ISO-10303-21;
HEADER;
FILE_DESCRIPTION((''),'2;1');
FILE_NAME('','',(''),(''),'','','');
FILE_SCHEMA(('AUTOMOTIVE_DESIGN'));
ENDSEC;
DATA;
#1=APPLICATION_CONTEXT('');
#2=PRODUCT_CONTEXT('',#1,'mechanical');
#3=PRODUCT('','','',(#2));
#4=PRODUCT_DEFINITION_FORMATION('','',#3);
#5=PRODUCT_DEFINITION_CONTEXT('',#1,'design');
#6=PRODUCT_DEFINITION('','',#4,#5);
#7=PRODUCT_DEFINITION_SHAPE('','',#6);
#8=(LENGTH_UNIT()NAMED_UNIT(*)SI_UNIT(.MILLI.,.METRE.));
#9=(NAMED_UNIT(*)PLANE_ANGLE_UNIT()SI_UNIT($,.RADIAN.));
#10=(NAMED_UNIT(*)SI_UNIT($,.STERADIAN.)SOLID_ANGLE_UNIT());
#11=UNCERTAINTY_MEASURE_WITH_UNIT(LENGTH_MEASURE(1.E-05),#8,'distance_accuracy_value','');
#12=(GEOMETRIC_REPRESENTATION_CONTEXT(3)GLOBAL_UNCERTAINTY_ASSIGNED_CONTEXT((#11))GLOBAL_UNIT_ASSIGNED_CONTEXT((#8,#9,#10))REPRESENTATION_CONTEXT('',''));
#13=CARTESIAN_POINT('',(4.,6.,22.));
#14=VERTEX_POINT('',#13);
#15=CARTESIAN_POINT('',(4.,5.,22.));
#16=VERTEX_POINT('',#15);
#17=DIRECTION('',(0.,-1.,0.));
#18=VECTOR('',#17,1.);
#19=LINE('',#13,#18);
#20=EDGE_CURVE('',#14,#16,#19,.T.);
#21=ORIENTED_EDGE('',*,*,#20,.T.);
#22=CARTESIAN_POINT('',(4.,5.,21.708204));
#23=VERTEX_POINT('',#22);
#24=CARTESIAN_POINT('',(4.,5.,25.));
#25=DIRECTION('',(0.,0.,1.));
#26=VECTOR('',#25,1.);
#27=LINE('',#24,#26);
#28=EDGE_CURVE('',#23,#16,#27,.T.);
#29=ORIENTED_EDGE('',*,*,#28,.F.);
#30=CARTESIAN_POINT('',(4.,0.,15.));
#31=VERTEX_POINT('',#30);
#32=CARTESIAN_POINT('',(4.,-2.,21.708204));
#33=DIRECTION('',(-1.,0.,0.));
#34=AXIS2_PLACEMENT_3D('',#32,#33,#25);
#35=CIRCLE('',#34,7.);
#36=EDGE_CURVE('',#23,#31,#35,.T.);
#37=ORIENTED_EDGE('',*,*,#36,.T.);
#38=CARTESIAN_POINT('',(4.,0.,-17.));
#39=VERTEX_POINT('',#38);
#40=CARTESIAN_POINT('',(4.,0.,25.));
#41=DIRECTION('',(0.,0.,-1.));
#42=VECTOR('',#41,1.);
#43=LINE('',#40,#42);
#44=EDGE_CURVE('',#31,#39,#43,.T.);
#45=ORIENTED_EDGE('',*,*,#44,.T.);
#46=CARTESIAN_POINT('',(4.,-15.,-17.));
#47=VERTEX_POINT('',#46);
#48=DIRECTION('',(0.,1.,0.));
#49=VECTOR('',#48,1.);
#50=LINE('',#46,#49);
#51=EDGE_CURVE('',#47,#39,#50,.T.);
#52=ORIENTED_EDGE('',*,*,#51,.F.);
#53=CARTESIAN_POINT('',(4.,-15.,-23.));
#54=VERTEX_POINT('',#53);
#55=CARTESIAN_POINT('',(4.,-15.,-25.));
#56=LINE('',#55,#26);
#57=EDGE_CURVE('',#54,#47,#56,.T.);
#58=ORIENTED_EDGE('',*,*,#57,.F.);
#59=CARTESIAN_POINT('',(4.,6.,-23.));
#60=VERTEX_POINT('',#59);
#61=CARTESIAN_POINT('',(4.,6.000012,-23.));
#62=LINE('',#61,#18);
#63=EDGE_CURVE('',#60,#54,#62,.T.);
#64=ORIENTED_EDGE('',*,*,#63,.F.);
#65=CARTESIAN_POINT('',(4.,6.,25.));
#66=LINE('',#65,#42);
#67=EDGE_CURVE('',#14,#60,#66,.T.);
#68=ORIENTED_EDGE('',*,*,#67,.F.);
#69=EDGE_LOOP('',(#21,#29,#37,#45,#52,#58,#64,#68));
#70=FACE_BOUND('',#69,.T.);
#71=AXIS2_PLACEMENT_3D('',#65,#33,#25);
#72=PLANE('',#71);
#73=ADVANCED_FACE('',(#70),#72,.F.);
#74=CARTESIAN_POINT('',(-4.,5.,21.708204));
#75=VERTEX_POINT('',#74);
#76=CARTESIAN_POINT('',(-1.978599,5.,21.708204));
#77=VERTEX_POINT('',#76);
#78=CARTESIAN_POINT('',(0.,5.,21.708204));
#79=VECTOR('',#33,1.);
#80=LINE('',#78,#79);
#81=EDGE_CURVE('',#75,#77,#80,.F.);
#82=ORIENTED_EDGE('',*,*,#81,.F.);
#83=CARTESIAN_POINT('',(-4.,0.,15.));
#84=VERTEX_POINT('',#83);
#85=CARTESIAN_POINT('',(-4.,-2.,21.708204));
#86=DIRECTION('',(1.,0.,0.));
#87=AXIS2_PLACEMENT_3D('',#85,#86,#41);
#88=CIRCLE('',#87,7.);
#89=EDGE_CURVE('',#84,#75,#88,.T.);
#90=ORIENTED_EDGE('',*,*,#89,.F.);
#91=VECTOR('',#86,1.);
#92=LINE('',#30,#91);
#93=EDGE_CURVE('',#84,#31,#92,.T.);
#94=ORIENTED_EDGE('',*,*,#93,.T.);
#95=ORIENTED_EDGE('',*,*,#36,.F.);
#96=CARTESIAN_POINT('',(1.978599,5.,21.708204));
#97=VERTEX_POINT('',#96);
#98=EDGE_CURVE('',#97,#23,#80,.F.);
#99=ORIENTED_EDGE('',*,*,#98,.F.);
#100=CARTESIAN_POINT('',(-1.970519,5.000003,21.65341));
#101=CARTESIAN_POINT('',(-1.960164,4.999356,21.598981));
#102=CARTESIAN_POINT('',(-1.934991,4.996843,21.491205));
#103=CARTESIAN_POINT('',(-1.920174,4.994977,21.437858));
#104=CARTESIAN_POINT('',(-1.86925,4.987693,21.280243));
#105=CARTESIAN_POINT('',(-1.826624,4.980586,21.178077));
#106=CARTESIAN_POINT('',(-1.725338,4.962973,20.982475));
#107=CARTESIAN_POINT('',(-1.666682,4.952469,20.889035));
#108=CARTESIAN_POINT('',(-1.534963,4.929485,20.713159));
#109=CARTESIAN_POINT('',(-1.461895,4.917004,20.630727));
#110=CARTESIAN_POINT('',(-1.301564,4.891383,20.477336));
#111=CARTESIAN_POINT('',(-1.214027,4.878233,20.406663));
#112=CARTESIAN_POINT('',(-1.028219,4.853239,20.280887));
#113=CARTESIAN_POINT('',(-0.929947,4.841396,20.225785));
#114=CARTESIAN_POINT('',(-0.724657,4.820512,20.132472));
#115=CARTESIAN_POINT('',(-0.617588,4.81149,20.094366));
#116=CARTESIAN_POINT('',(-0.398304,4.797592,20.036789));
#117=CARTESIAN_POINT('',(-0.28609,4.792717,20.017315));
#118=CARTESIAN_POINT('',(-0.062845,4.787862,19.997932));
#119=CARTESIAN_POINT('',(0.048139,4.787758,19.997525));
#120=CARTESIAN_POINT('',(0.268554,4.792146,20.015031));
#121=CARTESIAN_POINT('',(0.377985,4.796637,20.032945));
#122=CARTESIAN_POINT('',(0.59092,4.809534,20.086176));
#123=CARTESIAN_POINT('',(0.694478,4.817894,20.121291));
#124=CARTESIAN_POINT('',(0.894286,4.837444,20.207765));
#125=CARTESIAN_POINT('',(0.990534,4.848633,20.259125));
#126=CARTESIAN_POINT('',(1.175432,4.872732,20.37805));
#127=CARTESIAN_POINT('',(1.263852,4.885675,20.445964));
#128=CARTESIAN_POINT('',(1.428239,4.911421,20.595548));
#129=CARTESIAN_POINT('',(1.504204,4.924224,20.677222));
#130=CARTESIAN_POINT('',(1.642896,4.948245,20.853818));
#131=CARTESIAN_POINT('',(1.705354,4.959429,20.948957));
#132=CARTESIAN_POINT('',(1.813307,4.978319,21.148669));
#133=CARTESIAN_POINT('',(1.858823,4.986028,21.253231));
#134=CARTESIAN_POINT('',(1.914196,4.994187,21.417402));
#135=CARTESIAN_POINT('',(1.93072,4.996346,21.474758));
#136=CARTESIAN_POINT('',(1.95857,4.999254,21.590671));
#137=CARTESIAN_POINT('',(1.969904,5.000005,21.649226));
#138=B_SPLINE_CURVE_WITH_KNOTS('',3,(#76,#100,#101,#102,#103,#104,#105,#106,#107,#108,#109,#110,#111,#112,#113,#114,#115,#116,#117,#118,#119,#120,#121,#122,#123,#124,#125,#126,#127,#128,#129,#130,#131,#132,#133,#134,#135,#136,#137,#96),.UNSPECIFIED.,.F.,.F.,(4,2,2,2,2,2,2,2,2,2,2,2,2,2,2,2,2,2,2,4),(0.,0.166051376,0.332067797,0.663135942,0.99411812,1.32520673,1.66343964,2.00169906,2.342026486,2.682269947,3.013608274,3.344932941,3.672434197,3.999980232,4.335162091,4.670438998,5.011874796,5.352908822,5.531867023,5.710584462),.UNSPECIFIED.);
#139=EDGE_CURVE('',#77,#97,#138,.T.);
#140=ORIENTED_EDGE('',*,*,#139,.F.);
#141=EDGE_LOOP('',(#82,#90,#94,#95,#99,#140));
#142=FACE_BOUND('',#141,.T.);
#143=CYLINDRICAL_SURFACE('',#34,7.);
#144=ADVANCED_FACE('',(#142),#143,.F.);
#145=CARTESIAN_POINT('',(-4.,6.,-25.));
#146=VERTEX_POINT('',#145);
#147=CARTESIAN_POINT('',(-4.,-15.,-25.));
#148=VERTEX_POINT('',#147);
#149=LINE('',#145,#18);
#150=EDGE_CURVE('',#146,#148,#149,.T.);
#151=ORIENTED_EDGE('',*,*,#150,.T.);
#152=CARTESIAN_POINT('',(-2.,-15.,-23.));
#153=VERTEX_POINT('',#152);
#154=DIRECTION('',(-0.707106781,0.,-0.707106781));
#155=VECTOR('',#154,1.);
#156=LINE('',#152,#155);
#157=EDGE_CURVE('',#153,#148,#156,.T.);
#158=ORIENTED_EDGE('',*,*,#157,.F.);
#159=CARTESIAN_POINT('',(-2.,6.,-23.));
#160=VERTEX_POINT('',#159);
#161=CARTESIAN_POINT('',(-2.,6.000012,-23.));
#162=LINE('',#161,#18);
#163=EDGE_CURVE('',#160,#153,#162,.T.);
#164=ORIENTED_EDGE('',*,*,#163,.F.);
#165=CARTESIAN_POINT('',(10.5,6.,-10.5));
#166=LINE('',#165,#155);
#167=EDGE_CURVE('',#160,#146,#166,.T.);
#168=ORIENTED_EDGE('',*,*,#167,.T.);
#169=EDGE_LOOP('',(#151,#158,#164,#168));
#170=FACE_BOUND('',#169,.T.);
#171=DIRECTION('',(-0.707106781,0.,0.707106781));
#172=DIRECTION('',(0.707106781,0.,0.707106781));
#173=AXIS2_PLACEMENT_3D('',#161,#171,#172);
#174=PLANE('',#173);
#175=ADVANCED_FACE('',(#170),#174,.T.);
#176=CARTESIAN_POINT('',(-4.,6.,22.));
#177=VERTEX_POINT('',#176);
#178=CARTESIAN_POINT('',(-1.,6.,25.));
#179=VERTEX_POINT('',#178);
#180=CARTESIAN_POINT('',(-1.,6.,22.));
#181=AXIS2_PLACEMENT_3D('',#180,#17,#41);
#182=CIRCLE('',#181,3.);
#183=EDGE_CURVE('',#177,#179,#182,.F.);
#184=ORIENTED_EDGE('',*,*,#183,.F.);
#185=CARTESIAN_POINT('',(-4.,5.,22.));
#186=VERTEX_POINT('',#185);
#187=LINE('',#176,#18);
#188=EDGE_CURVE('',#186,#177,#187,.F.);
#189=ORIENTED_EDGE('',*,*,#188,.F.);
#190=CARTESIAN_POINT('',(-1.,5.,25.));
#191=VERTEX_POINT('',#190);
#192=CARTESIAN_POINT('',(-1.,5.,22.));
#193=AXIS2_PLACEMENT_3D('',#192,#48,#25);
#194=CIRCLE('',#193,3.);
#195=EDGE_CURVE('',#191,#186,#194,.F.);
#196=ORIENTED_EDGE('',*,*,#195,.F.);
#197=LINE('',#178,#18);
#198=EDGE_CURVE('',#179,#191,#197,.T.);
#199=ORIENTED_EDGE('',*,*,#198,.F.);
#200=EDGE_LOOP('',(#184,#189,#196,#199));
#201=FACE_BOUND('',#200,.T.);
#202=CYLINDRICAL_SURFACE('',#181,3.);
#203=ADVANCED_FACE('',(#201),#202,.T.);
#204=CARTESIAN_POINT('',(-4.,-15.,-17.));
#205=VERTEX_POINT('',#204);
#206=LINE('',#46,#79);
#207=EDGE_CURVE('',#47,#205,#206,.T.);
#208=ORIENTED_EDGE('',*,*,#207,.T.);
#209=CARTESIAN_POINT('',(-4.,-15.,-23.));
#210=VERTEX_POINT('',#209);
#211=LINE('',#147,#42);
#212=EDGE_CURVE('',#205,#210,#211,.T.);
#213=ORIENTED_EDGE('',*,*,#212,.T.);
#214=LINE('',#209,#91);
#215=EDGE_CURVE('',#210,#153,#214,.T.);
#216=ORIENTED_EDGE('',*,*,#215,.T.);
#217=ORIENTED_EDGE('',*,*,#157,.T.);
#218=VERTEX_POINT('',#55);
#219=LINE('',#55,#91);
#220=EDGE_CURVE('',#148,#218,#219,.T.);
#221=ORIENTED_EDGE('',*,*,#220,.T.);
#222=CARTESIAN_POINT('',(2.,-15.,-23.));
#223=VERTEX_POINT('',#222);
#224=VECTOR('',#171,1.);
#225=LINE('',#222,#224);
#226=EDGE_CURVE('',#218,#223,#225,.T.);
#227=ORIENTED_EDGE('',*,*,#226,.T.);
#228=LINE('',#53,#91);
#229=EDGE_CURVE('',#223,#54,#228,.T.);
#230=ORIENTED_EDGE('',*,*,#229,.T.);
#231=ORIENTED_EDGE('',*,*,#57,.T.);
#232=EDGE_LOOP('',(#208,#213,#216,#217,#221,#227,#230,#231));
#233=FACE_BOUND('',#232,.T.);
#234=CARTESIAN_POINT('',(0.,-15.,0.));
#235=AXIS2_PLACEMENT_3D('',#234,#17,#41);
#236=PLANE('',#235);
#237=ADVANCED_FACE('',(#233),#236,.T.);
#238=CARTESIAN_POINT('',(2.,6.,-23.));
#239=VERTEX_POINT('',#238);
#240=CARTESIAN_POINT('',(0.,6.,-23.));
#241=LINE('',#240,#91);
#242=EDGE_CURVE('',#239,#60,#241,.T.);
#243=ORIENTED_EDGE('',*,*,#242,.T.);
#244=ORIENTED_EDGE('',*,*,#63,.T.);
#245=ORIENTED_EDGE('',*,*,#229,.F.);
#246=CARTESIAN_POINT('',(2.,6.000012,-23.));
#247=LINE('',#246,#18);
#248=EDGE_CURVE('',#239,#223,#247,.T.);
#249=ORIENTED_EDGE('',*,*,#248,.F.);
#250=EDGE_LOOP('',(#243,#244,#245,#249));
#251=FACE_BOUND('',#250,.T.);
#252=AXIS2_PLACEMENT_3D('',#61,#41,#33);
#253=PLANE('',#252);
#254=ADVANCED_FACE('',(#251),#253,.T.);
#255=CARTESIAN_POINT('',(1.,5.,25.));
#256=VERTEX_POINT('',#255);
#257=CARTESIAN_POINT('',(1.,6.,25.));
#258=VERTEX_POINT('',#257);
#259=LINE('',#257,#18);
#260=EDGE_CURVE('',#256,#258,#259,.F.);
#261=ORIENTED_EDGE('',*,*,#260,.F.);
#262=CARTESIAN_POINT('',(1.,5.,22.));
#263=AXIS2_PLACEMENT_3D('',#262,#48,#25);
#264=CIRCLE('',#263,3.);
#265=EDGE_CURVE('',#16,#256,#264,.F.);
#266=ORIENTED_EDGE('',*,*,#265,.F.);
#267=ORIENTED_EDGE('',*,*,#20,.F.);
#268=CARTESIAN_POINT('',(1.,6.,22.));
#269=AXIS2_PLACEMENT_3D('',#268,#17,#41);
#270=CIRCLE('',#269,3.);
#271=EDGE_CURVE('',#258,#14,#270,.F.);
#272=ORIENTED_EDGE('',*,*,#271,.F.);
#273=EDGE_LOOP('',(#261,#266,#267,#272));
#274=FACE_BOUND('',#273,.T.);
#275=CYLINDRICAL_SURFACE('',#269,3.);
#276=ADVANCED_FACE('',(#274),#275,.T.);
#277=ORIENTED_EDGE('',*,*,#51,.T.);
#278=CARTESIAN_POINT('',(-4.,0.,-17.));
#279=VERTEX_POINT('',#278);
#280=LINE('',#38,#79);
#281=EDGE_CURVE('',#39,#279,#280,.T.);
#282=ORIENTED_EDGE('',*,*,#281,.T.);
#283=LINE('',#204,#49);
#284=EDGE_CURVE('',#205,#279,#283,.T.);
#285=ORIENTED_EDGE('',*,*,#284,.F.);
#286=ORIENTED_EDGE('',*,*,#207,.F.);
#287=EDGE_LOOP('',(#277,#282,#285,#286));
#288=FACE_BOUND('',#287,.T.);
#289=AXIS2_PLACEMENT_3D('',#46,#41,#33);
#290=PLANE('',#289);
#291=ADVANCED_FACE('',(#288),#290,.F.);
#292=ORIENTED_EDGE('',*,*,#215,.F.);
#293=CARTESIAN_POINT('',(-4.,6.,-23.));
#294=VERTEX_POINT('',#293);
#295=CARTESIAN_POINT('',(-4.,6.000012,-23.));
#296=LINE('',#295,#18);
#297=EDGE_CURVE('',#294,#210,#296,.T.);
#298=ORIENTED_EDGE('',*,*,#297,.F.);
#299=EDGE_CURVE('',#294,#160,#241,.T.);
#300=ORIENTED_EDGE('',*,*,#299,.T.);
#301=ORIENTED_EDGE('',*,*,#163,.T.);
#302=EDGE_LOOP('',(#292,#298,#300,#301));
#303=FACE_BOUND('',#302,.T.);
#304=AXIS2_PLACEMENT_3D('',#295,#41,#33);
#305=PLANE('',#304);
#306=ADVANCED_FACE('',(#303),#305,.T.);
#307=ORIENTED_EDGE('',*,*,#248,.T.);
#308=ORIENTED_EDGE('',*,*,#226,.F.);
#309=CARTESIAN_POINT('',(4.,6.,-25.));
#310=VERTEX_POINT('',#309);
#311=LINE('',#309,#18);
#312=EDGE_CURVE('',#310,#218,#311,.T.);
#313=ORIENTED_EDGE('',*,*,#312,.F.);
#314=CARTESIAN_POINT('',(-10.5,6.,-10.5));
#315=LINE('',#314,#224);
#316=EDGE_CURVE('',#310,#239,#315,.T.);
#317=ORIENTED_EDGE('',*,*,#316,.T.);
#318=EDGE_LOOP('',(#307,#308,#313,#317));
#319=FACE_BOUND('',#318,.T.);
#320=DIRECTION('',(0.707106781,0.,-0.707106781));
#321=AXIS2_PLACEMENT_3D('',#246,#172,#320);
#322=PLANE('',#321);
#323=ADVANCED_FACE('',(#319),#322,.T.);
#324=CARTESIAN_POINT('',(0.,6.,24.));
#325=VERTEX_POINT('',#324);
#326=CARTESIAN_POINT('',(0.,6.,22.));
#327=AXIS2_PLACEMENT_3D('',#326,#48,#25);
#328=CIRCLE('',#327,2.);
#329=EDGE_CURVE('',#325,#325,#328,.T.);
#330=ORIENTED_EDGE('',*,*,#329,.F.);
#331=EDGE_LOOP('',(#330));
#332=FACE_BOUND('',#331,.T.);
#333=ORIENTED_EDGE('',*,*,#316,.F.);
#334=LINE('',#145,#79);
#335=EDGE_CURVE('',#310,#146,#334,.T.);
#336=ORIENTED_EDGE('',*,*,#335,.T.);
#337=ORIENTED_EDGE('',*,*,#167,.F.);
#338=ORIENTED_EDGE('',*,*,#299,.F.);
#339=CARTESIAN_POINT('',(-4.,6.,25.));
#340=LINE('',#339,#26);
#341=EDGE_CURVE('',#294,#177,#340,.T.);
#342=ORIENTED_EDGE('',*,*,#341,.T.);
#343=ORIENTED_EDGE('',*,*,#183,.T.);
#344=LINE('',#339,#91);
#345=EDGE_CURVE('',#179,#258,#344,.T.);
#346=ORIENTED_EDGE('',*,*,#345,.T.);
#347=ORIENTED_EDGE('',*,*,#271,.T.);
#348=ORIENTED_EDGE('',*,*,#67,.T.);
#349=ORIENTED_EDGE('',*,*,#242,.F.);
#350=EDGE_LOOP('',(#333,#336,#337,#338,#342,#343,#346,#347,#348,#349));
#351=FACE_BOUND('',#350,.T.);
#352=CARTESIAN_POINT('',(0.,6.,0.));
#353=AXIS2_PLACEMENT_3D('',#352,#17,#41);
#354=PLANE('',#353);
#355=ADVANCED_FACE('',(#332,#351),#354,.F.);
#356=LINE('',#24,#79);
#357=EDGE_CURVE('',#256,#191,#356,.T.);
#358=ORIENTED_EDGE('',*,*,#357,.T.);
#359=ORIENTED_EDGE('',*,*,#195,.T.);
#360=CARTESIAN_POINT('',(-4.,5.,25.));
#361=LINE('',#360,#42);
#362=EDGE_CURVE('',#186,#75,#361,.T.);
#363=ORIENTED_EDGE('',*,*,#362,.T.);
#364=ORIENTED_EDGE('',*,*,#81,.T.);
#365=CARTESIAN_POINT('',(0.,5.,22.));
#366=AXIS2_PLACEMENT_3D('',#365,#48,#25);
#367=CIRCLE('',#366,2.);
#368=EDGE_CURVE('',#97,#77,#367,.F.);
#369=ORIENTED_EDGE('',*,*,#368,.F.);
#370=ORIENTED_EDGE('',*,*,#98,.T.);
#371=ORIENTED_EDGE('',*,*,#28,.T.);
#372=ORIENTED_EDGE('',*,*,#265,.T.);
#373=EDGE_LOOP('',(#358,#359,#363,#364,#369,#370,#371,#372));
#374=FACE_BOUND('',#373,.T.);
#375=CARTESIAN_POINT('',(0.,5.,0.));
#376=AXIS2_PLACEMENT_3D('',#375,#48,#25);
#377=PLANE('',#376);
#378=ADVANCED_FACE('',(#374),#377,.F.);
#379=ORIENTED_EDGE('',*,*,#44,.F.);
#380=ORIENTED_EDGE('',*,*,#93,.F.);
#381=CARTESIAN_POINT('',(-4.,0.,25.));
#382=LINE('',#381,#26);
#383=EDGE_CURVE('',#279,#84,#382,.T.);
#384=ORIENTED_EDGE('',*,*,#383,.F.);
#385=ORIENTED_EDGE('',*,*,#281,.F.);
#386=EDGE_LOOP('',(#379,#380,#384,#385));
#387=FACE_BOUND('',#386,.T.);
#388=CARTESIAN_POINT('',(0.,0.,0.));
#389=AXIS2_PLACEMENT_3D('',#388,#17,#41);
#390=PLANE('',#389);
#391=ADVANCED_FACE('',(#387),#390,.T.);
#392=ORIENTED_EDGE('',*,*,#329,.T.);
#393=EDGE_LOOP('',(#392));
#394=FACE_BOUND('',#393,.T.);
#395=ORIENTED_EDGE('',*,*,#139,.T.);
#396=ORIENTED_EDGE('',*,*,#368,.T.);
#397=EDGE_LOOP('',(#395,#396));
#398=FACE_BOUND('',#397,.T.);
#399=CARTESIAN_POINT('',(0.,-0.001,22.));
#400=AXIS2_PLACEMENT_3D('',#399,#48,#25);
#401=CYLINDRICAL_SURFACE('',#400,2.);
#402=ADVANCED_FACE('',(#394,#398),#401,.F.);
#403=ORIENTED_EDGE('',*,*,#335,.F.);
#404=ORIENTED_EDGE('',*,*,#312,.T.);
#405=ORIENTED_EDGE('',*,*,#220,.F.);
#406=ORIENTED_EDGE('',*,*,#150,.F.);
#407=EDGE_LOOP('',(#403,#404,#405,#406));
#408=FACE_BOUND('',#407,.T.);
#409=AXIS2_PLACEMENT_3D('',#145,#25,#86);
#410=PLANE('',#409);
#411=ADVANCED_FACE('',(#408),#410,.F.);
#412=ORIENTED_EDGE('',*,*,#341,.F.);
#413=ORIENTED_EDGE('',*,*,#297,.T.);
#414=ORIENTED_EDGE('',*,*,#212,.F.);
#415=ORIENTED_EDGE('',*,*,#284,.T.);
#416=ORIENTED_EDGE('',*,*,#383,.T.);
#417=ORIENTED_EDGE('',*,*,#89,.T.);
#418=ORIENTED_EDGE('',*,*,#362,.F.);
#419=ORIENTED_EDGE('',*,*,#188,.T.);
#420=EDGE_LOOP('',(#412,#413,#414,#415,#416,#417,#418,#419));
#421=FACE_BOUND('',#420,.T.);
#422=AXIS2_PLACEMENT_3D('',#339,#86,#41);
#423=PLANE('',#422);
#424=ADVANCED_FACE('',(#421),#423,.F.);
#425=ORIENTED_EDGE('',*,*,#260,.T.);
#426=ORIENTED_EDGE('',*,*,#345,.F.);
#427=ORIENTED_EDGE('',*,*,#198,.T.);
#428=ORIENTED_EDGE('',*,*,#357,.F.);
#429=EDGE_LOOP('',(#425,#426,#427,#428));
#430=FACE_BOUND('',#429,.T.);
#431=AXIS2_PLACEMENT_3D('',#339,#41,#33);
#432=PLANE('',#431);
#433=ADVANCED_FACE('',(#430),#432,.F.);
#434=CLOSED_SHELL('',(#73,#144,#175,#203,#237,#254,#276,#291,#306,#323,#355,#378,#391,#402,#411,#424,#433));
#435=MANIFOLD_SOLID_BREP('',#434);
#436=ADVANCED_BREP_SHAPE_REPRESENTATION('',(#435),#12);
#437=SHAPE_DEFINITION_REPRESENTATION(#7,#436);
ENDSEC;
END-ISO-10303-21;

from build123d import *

# Parameters (mm, degrees)
SKETCH1_W                      = 8
SKETCH1_H                      = 50
BOSS_EXTRUDE1_DEPTH            = 6
SKETCH2_W                      = 8
SKETCH2_H                      = 10
CUT_EXTRUDE2_DEPTH             = 5
CUT_EXTRUDE3_REACH             = 28.019
SKETCH3_R                      = 2
FILLET1_R                      = 3
FILLET2_R                      = 7
SKETCH4_W                      = 8
SKETCH4_H                      = 8
BOSS_EXTRUDE2_DEPTH            = 15
CUT_EXTRUDE4_REACH             = 34.894
CUT_EXTRUDE4_DIRECTION_2_DEPTH = 33.893768419


with BuildPart() as part:
    # Sketch1 → Boss-Extrude1 (new body)
    with BuildSketch(Plane(origin=(0, 0, 0), x_dir=(1, 0, 0), z_dir=(0, 1, 0))):
        Rectangle(SKETCH1_W, SKETCH1_H)
    extrude(amount=BOSS_EXTRUDE1_DEPTH)

    # Sketch2 → Cut-Extrude2 (cut)
    with BuildSketch(Plane.XZ):
        with Locations((0, 20)):
            Rectangle(SKETCH2_W, SKETCH2_H)
    extrude(amount=-CUT_EXTRUDE2_DEPTH, mode=Mode.SUBTRACT)

    # Sketch3 → Cut-Extrude3 (cut, up to next)
    with BuildSketch(Plane(origin=(0, 6, 0), x_dir=(1, 0, 0), z_dir=(0, 1, 0)), mode=Mode.PRIVATE) as cut_extrude3_sk1:
        with Locations(Location((0, -22, 0), (0, 0, 270))):
            Circle(SKETCH3_R)
    cut_extrude3_tool1 = extrude(cut_extrude3_sk1.sketch, amount=-CUT_EXTRUDE3_REACH, mode=Mode.PRIVATE) & part.part
    add(cut_extrude3_tool1.solids().sort_by_distance((0, 6, 22))[0], mode=Mode.SUBTRACT)

    # Fillet1
    fillet1_edges = [part.edges().sort_by_distance(p)[0] for p in [
        (4, 5.5, 25),
        (-4, 5.5, 25),
    ]]
    fillet(fillet1_edges, radius=FILLET1_R)

    # Fillet2
    # the kernel refuses this fillet: 7 mm, written as the material it adds along each edge
    with BuildSketch(Plane(origin=(-4, 5, 15), x_dir=(0, 0, 1), z_dir=(1, 0, 0))) as fillet2_piece_1_section:
        with BuildLine():
            CenterArc((6.708203932, 7), FILLET2_R, 196.601549599, 73.398450401)
            Line((0, 5), (0, 0))
            Line((0, 0), (6.708203932, 0))
        make_face()
    fillet2_piece_1 = extrude(amount=8, mode=Mode.PRIVATE)
    fillet2_piece_1 = fillet2_piece_1 - Plane(origin=(0, 5, 22), x_dir=(0, 0, 1), z_dir=(0, 1, 0)) * Cylinder(2, 43, mode=Mode.PRIVATE)
    add(fillet2_piece_1)

    # Sketch4 → Boss-Extrude2 (add)
    with BuildSketch(Plane(origin=(0, 0, 0), x_dir=(-1, 0, 0), z_dir=(0, -1, 0))):
        with Locations((0, 21)):
            Rectangle(SKETCH4_W, SKETCH4_H)
    extrude(amount=BOSS_EXTRUDE2_DEPTH)

    # Sketch5 → Cut-Extrude4 (cut, up to next)
    with BuildSketch(Plane(origin=(0, 6, 0), x_dir=(1, 0, 0), z_dir=(0, 1, 0)), mode=Mode.PRIVATE) as cut_extrude4_sk1:
        Polygon((4, 25), (4, 23), (2, 23), align=None)
    cut_extrude4_tool1 = extrude(cut_extrude4_sk1.sketch, amount=-CUT_EXTRUDE4_REACH, mode=Mode.PRIVATE) & part.part
    # Sketch5 → Cut-Extrude4 (cut, up to next)
    with BuildSketch(Plane(origin=(0, 6, 0), x_dir=(1, 0, 0), z_dir=(0, 1, 0)), mode=Mode.PRIVATE) as cut_extrude4_sk2:
        Polygon((-4, 25), (-4, 23), (-2, 23), align=None)
    cut_extrude4_tool2 = extrude(cut_extrude4_sk2.sketch, amount=-CUT_EXTRUDE4_REACH, mode=Mode.PRIVATE) & part.part
    add(cut_extrude4_tool1.solids().sort_by_distance((3.333333, 6, -23.666667))[0], mode=Mode.SUBTRACT)
    add(cut_extrude4_tool2.solids().sort_by_distance((-3.333333, 6, -23.666667))[0], mode=Mode.SUBTRACT)

    # Sketch5 → Cut-Extrude4 direction 2 (cut)
    with BuildSketch(Plane(origin=(0, 6, 0), x_dir=(1, 0, 0), z_dir=(0, 1, 0))):
        Polygon((4, 25), (4, 23), (2, 23), align=None)
        Polygon((-4, 25), (-4, 23), (-2, 23), align=None)
    extrude(amount=CUT_EXTRUDE4_DIRECTION_2_DEPTH, mode=Mode.SUBTRACT)


solid = part.part
